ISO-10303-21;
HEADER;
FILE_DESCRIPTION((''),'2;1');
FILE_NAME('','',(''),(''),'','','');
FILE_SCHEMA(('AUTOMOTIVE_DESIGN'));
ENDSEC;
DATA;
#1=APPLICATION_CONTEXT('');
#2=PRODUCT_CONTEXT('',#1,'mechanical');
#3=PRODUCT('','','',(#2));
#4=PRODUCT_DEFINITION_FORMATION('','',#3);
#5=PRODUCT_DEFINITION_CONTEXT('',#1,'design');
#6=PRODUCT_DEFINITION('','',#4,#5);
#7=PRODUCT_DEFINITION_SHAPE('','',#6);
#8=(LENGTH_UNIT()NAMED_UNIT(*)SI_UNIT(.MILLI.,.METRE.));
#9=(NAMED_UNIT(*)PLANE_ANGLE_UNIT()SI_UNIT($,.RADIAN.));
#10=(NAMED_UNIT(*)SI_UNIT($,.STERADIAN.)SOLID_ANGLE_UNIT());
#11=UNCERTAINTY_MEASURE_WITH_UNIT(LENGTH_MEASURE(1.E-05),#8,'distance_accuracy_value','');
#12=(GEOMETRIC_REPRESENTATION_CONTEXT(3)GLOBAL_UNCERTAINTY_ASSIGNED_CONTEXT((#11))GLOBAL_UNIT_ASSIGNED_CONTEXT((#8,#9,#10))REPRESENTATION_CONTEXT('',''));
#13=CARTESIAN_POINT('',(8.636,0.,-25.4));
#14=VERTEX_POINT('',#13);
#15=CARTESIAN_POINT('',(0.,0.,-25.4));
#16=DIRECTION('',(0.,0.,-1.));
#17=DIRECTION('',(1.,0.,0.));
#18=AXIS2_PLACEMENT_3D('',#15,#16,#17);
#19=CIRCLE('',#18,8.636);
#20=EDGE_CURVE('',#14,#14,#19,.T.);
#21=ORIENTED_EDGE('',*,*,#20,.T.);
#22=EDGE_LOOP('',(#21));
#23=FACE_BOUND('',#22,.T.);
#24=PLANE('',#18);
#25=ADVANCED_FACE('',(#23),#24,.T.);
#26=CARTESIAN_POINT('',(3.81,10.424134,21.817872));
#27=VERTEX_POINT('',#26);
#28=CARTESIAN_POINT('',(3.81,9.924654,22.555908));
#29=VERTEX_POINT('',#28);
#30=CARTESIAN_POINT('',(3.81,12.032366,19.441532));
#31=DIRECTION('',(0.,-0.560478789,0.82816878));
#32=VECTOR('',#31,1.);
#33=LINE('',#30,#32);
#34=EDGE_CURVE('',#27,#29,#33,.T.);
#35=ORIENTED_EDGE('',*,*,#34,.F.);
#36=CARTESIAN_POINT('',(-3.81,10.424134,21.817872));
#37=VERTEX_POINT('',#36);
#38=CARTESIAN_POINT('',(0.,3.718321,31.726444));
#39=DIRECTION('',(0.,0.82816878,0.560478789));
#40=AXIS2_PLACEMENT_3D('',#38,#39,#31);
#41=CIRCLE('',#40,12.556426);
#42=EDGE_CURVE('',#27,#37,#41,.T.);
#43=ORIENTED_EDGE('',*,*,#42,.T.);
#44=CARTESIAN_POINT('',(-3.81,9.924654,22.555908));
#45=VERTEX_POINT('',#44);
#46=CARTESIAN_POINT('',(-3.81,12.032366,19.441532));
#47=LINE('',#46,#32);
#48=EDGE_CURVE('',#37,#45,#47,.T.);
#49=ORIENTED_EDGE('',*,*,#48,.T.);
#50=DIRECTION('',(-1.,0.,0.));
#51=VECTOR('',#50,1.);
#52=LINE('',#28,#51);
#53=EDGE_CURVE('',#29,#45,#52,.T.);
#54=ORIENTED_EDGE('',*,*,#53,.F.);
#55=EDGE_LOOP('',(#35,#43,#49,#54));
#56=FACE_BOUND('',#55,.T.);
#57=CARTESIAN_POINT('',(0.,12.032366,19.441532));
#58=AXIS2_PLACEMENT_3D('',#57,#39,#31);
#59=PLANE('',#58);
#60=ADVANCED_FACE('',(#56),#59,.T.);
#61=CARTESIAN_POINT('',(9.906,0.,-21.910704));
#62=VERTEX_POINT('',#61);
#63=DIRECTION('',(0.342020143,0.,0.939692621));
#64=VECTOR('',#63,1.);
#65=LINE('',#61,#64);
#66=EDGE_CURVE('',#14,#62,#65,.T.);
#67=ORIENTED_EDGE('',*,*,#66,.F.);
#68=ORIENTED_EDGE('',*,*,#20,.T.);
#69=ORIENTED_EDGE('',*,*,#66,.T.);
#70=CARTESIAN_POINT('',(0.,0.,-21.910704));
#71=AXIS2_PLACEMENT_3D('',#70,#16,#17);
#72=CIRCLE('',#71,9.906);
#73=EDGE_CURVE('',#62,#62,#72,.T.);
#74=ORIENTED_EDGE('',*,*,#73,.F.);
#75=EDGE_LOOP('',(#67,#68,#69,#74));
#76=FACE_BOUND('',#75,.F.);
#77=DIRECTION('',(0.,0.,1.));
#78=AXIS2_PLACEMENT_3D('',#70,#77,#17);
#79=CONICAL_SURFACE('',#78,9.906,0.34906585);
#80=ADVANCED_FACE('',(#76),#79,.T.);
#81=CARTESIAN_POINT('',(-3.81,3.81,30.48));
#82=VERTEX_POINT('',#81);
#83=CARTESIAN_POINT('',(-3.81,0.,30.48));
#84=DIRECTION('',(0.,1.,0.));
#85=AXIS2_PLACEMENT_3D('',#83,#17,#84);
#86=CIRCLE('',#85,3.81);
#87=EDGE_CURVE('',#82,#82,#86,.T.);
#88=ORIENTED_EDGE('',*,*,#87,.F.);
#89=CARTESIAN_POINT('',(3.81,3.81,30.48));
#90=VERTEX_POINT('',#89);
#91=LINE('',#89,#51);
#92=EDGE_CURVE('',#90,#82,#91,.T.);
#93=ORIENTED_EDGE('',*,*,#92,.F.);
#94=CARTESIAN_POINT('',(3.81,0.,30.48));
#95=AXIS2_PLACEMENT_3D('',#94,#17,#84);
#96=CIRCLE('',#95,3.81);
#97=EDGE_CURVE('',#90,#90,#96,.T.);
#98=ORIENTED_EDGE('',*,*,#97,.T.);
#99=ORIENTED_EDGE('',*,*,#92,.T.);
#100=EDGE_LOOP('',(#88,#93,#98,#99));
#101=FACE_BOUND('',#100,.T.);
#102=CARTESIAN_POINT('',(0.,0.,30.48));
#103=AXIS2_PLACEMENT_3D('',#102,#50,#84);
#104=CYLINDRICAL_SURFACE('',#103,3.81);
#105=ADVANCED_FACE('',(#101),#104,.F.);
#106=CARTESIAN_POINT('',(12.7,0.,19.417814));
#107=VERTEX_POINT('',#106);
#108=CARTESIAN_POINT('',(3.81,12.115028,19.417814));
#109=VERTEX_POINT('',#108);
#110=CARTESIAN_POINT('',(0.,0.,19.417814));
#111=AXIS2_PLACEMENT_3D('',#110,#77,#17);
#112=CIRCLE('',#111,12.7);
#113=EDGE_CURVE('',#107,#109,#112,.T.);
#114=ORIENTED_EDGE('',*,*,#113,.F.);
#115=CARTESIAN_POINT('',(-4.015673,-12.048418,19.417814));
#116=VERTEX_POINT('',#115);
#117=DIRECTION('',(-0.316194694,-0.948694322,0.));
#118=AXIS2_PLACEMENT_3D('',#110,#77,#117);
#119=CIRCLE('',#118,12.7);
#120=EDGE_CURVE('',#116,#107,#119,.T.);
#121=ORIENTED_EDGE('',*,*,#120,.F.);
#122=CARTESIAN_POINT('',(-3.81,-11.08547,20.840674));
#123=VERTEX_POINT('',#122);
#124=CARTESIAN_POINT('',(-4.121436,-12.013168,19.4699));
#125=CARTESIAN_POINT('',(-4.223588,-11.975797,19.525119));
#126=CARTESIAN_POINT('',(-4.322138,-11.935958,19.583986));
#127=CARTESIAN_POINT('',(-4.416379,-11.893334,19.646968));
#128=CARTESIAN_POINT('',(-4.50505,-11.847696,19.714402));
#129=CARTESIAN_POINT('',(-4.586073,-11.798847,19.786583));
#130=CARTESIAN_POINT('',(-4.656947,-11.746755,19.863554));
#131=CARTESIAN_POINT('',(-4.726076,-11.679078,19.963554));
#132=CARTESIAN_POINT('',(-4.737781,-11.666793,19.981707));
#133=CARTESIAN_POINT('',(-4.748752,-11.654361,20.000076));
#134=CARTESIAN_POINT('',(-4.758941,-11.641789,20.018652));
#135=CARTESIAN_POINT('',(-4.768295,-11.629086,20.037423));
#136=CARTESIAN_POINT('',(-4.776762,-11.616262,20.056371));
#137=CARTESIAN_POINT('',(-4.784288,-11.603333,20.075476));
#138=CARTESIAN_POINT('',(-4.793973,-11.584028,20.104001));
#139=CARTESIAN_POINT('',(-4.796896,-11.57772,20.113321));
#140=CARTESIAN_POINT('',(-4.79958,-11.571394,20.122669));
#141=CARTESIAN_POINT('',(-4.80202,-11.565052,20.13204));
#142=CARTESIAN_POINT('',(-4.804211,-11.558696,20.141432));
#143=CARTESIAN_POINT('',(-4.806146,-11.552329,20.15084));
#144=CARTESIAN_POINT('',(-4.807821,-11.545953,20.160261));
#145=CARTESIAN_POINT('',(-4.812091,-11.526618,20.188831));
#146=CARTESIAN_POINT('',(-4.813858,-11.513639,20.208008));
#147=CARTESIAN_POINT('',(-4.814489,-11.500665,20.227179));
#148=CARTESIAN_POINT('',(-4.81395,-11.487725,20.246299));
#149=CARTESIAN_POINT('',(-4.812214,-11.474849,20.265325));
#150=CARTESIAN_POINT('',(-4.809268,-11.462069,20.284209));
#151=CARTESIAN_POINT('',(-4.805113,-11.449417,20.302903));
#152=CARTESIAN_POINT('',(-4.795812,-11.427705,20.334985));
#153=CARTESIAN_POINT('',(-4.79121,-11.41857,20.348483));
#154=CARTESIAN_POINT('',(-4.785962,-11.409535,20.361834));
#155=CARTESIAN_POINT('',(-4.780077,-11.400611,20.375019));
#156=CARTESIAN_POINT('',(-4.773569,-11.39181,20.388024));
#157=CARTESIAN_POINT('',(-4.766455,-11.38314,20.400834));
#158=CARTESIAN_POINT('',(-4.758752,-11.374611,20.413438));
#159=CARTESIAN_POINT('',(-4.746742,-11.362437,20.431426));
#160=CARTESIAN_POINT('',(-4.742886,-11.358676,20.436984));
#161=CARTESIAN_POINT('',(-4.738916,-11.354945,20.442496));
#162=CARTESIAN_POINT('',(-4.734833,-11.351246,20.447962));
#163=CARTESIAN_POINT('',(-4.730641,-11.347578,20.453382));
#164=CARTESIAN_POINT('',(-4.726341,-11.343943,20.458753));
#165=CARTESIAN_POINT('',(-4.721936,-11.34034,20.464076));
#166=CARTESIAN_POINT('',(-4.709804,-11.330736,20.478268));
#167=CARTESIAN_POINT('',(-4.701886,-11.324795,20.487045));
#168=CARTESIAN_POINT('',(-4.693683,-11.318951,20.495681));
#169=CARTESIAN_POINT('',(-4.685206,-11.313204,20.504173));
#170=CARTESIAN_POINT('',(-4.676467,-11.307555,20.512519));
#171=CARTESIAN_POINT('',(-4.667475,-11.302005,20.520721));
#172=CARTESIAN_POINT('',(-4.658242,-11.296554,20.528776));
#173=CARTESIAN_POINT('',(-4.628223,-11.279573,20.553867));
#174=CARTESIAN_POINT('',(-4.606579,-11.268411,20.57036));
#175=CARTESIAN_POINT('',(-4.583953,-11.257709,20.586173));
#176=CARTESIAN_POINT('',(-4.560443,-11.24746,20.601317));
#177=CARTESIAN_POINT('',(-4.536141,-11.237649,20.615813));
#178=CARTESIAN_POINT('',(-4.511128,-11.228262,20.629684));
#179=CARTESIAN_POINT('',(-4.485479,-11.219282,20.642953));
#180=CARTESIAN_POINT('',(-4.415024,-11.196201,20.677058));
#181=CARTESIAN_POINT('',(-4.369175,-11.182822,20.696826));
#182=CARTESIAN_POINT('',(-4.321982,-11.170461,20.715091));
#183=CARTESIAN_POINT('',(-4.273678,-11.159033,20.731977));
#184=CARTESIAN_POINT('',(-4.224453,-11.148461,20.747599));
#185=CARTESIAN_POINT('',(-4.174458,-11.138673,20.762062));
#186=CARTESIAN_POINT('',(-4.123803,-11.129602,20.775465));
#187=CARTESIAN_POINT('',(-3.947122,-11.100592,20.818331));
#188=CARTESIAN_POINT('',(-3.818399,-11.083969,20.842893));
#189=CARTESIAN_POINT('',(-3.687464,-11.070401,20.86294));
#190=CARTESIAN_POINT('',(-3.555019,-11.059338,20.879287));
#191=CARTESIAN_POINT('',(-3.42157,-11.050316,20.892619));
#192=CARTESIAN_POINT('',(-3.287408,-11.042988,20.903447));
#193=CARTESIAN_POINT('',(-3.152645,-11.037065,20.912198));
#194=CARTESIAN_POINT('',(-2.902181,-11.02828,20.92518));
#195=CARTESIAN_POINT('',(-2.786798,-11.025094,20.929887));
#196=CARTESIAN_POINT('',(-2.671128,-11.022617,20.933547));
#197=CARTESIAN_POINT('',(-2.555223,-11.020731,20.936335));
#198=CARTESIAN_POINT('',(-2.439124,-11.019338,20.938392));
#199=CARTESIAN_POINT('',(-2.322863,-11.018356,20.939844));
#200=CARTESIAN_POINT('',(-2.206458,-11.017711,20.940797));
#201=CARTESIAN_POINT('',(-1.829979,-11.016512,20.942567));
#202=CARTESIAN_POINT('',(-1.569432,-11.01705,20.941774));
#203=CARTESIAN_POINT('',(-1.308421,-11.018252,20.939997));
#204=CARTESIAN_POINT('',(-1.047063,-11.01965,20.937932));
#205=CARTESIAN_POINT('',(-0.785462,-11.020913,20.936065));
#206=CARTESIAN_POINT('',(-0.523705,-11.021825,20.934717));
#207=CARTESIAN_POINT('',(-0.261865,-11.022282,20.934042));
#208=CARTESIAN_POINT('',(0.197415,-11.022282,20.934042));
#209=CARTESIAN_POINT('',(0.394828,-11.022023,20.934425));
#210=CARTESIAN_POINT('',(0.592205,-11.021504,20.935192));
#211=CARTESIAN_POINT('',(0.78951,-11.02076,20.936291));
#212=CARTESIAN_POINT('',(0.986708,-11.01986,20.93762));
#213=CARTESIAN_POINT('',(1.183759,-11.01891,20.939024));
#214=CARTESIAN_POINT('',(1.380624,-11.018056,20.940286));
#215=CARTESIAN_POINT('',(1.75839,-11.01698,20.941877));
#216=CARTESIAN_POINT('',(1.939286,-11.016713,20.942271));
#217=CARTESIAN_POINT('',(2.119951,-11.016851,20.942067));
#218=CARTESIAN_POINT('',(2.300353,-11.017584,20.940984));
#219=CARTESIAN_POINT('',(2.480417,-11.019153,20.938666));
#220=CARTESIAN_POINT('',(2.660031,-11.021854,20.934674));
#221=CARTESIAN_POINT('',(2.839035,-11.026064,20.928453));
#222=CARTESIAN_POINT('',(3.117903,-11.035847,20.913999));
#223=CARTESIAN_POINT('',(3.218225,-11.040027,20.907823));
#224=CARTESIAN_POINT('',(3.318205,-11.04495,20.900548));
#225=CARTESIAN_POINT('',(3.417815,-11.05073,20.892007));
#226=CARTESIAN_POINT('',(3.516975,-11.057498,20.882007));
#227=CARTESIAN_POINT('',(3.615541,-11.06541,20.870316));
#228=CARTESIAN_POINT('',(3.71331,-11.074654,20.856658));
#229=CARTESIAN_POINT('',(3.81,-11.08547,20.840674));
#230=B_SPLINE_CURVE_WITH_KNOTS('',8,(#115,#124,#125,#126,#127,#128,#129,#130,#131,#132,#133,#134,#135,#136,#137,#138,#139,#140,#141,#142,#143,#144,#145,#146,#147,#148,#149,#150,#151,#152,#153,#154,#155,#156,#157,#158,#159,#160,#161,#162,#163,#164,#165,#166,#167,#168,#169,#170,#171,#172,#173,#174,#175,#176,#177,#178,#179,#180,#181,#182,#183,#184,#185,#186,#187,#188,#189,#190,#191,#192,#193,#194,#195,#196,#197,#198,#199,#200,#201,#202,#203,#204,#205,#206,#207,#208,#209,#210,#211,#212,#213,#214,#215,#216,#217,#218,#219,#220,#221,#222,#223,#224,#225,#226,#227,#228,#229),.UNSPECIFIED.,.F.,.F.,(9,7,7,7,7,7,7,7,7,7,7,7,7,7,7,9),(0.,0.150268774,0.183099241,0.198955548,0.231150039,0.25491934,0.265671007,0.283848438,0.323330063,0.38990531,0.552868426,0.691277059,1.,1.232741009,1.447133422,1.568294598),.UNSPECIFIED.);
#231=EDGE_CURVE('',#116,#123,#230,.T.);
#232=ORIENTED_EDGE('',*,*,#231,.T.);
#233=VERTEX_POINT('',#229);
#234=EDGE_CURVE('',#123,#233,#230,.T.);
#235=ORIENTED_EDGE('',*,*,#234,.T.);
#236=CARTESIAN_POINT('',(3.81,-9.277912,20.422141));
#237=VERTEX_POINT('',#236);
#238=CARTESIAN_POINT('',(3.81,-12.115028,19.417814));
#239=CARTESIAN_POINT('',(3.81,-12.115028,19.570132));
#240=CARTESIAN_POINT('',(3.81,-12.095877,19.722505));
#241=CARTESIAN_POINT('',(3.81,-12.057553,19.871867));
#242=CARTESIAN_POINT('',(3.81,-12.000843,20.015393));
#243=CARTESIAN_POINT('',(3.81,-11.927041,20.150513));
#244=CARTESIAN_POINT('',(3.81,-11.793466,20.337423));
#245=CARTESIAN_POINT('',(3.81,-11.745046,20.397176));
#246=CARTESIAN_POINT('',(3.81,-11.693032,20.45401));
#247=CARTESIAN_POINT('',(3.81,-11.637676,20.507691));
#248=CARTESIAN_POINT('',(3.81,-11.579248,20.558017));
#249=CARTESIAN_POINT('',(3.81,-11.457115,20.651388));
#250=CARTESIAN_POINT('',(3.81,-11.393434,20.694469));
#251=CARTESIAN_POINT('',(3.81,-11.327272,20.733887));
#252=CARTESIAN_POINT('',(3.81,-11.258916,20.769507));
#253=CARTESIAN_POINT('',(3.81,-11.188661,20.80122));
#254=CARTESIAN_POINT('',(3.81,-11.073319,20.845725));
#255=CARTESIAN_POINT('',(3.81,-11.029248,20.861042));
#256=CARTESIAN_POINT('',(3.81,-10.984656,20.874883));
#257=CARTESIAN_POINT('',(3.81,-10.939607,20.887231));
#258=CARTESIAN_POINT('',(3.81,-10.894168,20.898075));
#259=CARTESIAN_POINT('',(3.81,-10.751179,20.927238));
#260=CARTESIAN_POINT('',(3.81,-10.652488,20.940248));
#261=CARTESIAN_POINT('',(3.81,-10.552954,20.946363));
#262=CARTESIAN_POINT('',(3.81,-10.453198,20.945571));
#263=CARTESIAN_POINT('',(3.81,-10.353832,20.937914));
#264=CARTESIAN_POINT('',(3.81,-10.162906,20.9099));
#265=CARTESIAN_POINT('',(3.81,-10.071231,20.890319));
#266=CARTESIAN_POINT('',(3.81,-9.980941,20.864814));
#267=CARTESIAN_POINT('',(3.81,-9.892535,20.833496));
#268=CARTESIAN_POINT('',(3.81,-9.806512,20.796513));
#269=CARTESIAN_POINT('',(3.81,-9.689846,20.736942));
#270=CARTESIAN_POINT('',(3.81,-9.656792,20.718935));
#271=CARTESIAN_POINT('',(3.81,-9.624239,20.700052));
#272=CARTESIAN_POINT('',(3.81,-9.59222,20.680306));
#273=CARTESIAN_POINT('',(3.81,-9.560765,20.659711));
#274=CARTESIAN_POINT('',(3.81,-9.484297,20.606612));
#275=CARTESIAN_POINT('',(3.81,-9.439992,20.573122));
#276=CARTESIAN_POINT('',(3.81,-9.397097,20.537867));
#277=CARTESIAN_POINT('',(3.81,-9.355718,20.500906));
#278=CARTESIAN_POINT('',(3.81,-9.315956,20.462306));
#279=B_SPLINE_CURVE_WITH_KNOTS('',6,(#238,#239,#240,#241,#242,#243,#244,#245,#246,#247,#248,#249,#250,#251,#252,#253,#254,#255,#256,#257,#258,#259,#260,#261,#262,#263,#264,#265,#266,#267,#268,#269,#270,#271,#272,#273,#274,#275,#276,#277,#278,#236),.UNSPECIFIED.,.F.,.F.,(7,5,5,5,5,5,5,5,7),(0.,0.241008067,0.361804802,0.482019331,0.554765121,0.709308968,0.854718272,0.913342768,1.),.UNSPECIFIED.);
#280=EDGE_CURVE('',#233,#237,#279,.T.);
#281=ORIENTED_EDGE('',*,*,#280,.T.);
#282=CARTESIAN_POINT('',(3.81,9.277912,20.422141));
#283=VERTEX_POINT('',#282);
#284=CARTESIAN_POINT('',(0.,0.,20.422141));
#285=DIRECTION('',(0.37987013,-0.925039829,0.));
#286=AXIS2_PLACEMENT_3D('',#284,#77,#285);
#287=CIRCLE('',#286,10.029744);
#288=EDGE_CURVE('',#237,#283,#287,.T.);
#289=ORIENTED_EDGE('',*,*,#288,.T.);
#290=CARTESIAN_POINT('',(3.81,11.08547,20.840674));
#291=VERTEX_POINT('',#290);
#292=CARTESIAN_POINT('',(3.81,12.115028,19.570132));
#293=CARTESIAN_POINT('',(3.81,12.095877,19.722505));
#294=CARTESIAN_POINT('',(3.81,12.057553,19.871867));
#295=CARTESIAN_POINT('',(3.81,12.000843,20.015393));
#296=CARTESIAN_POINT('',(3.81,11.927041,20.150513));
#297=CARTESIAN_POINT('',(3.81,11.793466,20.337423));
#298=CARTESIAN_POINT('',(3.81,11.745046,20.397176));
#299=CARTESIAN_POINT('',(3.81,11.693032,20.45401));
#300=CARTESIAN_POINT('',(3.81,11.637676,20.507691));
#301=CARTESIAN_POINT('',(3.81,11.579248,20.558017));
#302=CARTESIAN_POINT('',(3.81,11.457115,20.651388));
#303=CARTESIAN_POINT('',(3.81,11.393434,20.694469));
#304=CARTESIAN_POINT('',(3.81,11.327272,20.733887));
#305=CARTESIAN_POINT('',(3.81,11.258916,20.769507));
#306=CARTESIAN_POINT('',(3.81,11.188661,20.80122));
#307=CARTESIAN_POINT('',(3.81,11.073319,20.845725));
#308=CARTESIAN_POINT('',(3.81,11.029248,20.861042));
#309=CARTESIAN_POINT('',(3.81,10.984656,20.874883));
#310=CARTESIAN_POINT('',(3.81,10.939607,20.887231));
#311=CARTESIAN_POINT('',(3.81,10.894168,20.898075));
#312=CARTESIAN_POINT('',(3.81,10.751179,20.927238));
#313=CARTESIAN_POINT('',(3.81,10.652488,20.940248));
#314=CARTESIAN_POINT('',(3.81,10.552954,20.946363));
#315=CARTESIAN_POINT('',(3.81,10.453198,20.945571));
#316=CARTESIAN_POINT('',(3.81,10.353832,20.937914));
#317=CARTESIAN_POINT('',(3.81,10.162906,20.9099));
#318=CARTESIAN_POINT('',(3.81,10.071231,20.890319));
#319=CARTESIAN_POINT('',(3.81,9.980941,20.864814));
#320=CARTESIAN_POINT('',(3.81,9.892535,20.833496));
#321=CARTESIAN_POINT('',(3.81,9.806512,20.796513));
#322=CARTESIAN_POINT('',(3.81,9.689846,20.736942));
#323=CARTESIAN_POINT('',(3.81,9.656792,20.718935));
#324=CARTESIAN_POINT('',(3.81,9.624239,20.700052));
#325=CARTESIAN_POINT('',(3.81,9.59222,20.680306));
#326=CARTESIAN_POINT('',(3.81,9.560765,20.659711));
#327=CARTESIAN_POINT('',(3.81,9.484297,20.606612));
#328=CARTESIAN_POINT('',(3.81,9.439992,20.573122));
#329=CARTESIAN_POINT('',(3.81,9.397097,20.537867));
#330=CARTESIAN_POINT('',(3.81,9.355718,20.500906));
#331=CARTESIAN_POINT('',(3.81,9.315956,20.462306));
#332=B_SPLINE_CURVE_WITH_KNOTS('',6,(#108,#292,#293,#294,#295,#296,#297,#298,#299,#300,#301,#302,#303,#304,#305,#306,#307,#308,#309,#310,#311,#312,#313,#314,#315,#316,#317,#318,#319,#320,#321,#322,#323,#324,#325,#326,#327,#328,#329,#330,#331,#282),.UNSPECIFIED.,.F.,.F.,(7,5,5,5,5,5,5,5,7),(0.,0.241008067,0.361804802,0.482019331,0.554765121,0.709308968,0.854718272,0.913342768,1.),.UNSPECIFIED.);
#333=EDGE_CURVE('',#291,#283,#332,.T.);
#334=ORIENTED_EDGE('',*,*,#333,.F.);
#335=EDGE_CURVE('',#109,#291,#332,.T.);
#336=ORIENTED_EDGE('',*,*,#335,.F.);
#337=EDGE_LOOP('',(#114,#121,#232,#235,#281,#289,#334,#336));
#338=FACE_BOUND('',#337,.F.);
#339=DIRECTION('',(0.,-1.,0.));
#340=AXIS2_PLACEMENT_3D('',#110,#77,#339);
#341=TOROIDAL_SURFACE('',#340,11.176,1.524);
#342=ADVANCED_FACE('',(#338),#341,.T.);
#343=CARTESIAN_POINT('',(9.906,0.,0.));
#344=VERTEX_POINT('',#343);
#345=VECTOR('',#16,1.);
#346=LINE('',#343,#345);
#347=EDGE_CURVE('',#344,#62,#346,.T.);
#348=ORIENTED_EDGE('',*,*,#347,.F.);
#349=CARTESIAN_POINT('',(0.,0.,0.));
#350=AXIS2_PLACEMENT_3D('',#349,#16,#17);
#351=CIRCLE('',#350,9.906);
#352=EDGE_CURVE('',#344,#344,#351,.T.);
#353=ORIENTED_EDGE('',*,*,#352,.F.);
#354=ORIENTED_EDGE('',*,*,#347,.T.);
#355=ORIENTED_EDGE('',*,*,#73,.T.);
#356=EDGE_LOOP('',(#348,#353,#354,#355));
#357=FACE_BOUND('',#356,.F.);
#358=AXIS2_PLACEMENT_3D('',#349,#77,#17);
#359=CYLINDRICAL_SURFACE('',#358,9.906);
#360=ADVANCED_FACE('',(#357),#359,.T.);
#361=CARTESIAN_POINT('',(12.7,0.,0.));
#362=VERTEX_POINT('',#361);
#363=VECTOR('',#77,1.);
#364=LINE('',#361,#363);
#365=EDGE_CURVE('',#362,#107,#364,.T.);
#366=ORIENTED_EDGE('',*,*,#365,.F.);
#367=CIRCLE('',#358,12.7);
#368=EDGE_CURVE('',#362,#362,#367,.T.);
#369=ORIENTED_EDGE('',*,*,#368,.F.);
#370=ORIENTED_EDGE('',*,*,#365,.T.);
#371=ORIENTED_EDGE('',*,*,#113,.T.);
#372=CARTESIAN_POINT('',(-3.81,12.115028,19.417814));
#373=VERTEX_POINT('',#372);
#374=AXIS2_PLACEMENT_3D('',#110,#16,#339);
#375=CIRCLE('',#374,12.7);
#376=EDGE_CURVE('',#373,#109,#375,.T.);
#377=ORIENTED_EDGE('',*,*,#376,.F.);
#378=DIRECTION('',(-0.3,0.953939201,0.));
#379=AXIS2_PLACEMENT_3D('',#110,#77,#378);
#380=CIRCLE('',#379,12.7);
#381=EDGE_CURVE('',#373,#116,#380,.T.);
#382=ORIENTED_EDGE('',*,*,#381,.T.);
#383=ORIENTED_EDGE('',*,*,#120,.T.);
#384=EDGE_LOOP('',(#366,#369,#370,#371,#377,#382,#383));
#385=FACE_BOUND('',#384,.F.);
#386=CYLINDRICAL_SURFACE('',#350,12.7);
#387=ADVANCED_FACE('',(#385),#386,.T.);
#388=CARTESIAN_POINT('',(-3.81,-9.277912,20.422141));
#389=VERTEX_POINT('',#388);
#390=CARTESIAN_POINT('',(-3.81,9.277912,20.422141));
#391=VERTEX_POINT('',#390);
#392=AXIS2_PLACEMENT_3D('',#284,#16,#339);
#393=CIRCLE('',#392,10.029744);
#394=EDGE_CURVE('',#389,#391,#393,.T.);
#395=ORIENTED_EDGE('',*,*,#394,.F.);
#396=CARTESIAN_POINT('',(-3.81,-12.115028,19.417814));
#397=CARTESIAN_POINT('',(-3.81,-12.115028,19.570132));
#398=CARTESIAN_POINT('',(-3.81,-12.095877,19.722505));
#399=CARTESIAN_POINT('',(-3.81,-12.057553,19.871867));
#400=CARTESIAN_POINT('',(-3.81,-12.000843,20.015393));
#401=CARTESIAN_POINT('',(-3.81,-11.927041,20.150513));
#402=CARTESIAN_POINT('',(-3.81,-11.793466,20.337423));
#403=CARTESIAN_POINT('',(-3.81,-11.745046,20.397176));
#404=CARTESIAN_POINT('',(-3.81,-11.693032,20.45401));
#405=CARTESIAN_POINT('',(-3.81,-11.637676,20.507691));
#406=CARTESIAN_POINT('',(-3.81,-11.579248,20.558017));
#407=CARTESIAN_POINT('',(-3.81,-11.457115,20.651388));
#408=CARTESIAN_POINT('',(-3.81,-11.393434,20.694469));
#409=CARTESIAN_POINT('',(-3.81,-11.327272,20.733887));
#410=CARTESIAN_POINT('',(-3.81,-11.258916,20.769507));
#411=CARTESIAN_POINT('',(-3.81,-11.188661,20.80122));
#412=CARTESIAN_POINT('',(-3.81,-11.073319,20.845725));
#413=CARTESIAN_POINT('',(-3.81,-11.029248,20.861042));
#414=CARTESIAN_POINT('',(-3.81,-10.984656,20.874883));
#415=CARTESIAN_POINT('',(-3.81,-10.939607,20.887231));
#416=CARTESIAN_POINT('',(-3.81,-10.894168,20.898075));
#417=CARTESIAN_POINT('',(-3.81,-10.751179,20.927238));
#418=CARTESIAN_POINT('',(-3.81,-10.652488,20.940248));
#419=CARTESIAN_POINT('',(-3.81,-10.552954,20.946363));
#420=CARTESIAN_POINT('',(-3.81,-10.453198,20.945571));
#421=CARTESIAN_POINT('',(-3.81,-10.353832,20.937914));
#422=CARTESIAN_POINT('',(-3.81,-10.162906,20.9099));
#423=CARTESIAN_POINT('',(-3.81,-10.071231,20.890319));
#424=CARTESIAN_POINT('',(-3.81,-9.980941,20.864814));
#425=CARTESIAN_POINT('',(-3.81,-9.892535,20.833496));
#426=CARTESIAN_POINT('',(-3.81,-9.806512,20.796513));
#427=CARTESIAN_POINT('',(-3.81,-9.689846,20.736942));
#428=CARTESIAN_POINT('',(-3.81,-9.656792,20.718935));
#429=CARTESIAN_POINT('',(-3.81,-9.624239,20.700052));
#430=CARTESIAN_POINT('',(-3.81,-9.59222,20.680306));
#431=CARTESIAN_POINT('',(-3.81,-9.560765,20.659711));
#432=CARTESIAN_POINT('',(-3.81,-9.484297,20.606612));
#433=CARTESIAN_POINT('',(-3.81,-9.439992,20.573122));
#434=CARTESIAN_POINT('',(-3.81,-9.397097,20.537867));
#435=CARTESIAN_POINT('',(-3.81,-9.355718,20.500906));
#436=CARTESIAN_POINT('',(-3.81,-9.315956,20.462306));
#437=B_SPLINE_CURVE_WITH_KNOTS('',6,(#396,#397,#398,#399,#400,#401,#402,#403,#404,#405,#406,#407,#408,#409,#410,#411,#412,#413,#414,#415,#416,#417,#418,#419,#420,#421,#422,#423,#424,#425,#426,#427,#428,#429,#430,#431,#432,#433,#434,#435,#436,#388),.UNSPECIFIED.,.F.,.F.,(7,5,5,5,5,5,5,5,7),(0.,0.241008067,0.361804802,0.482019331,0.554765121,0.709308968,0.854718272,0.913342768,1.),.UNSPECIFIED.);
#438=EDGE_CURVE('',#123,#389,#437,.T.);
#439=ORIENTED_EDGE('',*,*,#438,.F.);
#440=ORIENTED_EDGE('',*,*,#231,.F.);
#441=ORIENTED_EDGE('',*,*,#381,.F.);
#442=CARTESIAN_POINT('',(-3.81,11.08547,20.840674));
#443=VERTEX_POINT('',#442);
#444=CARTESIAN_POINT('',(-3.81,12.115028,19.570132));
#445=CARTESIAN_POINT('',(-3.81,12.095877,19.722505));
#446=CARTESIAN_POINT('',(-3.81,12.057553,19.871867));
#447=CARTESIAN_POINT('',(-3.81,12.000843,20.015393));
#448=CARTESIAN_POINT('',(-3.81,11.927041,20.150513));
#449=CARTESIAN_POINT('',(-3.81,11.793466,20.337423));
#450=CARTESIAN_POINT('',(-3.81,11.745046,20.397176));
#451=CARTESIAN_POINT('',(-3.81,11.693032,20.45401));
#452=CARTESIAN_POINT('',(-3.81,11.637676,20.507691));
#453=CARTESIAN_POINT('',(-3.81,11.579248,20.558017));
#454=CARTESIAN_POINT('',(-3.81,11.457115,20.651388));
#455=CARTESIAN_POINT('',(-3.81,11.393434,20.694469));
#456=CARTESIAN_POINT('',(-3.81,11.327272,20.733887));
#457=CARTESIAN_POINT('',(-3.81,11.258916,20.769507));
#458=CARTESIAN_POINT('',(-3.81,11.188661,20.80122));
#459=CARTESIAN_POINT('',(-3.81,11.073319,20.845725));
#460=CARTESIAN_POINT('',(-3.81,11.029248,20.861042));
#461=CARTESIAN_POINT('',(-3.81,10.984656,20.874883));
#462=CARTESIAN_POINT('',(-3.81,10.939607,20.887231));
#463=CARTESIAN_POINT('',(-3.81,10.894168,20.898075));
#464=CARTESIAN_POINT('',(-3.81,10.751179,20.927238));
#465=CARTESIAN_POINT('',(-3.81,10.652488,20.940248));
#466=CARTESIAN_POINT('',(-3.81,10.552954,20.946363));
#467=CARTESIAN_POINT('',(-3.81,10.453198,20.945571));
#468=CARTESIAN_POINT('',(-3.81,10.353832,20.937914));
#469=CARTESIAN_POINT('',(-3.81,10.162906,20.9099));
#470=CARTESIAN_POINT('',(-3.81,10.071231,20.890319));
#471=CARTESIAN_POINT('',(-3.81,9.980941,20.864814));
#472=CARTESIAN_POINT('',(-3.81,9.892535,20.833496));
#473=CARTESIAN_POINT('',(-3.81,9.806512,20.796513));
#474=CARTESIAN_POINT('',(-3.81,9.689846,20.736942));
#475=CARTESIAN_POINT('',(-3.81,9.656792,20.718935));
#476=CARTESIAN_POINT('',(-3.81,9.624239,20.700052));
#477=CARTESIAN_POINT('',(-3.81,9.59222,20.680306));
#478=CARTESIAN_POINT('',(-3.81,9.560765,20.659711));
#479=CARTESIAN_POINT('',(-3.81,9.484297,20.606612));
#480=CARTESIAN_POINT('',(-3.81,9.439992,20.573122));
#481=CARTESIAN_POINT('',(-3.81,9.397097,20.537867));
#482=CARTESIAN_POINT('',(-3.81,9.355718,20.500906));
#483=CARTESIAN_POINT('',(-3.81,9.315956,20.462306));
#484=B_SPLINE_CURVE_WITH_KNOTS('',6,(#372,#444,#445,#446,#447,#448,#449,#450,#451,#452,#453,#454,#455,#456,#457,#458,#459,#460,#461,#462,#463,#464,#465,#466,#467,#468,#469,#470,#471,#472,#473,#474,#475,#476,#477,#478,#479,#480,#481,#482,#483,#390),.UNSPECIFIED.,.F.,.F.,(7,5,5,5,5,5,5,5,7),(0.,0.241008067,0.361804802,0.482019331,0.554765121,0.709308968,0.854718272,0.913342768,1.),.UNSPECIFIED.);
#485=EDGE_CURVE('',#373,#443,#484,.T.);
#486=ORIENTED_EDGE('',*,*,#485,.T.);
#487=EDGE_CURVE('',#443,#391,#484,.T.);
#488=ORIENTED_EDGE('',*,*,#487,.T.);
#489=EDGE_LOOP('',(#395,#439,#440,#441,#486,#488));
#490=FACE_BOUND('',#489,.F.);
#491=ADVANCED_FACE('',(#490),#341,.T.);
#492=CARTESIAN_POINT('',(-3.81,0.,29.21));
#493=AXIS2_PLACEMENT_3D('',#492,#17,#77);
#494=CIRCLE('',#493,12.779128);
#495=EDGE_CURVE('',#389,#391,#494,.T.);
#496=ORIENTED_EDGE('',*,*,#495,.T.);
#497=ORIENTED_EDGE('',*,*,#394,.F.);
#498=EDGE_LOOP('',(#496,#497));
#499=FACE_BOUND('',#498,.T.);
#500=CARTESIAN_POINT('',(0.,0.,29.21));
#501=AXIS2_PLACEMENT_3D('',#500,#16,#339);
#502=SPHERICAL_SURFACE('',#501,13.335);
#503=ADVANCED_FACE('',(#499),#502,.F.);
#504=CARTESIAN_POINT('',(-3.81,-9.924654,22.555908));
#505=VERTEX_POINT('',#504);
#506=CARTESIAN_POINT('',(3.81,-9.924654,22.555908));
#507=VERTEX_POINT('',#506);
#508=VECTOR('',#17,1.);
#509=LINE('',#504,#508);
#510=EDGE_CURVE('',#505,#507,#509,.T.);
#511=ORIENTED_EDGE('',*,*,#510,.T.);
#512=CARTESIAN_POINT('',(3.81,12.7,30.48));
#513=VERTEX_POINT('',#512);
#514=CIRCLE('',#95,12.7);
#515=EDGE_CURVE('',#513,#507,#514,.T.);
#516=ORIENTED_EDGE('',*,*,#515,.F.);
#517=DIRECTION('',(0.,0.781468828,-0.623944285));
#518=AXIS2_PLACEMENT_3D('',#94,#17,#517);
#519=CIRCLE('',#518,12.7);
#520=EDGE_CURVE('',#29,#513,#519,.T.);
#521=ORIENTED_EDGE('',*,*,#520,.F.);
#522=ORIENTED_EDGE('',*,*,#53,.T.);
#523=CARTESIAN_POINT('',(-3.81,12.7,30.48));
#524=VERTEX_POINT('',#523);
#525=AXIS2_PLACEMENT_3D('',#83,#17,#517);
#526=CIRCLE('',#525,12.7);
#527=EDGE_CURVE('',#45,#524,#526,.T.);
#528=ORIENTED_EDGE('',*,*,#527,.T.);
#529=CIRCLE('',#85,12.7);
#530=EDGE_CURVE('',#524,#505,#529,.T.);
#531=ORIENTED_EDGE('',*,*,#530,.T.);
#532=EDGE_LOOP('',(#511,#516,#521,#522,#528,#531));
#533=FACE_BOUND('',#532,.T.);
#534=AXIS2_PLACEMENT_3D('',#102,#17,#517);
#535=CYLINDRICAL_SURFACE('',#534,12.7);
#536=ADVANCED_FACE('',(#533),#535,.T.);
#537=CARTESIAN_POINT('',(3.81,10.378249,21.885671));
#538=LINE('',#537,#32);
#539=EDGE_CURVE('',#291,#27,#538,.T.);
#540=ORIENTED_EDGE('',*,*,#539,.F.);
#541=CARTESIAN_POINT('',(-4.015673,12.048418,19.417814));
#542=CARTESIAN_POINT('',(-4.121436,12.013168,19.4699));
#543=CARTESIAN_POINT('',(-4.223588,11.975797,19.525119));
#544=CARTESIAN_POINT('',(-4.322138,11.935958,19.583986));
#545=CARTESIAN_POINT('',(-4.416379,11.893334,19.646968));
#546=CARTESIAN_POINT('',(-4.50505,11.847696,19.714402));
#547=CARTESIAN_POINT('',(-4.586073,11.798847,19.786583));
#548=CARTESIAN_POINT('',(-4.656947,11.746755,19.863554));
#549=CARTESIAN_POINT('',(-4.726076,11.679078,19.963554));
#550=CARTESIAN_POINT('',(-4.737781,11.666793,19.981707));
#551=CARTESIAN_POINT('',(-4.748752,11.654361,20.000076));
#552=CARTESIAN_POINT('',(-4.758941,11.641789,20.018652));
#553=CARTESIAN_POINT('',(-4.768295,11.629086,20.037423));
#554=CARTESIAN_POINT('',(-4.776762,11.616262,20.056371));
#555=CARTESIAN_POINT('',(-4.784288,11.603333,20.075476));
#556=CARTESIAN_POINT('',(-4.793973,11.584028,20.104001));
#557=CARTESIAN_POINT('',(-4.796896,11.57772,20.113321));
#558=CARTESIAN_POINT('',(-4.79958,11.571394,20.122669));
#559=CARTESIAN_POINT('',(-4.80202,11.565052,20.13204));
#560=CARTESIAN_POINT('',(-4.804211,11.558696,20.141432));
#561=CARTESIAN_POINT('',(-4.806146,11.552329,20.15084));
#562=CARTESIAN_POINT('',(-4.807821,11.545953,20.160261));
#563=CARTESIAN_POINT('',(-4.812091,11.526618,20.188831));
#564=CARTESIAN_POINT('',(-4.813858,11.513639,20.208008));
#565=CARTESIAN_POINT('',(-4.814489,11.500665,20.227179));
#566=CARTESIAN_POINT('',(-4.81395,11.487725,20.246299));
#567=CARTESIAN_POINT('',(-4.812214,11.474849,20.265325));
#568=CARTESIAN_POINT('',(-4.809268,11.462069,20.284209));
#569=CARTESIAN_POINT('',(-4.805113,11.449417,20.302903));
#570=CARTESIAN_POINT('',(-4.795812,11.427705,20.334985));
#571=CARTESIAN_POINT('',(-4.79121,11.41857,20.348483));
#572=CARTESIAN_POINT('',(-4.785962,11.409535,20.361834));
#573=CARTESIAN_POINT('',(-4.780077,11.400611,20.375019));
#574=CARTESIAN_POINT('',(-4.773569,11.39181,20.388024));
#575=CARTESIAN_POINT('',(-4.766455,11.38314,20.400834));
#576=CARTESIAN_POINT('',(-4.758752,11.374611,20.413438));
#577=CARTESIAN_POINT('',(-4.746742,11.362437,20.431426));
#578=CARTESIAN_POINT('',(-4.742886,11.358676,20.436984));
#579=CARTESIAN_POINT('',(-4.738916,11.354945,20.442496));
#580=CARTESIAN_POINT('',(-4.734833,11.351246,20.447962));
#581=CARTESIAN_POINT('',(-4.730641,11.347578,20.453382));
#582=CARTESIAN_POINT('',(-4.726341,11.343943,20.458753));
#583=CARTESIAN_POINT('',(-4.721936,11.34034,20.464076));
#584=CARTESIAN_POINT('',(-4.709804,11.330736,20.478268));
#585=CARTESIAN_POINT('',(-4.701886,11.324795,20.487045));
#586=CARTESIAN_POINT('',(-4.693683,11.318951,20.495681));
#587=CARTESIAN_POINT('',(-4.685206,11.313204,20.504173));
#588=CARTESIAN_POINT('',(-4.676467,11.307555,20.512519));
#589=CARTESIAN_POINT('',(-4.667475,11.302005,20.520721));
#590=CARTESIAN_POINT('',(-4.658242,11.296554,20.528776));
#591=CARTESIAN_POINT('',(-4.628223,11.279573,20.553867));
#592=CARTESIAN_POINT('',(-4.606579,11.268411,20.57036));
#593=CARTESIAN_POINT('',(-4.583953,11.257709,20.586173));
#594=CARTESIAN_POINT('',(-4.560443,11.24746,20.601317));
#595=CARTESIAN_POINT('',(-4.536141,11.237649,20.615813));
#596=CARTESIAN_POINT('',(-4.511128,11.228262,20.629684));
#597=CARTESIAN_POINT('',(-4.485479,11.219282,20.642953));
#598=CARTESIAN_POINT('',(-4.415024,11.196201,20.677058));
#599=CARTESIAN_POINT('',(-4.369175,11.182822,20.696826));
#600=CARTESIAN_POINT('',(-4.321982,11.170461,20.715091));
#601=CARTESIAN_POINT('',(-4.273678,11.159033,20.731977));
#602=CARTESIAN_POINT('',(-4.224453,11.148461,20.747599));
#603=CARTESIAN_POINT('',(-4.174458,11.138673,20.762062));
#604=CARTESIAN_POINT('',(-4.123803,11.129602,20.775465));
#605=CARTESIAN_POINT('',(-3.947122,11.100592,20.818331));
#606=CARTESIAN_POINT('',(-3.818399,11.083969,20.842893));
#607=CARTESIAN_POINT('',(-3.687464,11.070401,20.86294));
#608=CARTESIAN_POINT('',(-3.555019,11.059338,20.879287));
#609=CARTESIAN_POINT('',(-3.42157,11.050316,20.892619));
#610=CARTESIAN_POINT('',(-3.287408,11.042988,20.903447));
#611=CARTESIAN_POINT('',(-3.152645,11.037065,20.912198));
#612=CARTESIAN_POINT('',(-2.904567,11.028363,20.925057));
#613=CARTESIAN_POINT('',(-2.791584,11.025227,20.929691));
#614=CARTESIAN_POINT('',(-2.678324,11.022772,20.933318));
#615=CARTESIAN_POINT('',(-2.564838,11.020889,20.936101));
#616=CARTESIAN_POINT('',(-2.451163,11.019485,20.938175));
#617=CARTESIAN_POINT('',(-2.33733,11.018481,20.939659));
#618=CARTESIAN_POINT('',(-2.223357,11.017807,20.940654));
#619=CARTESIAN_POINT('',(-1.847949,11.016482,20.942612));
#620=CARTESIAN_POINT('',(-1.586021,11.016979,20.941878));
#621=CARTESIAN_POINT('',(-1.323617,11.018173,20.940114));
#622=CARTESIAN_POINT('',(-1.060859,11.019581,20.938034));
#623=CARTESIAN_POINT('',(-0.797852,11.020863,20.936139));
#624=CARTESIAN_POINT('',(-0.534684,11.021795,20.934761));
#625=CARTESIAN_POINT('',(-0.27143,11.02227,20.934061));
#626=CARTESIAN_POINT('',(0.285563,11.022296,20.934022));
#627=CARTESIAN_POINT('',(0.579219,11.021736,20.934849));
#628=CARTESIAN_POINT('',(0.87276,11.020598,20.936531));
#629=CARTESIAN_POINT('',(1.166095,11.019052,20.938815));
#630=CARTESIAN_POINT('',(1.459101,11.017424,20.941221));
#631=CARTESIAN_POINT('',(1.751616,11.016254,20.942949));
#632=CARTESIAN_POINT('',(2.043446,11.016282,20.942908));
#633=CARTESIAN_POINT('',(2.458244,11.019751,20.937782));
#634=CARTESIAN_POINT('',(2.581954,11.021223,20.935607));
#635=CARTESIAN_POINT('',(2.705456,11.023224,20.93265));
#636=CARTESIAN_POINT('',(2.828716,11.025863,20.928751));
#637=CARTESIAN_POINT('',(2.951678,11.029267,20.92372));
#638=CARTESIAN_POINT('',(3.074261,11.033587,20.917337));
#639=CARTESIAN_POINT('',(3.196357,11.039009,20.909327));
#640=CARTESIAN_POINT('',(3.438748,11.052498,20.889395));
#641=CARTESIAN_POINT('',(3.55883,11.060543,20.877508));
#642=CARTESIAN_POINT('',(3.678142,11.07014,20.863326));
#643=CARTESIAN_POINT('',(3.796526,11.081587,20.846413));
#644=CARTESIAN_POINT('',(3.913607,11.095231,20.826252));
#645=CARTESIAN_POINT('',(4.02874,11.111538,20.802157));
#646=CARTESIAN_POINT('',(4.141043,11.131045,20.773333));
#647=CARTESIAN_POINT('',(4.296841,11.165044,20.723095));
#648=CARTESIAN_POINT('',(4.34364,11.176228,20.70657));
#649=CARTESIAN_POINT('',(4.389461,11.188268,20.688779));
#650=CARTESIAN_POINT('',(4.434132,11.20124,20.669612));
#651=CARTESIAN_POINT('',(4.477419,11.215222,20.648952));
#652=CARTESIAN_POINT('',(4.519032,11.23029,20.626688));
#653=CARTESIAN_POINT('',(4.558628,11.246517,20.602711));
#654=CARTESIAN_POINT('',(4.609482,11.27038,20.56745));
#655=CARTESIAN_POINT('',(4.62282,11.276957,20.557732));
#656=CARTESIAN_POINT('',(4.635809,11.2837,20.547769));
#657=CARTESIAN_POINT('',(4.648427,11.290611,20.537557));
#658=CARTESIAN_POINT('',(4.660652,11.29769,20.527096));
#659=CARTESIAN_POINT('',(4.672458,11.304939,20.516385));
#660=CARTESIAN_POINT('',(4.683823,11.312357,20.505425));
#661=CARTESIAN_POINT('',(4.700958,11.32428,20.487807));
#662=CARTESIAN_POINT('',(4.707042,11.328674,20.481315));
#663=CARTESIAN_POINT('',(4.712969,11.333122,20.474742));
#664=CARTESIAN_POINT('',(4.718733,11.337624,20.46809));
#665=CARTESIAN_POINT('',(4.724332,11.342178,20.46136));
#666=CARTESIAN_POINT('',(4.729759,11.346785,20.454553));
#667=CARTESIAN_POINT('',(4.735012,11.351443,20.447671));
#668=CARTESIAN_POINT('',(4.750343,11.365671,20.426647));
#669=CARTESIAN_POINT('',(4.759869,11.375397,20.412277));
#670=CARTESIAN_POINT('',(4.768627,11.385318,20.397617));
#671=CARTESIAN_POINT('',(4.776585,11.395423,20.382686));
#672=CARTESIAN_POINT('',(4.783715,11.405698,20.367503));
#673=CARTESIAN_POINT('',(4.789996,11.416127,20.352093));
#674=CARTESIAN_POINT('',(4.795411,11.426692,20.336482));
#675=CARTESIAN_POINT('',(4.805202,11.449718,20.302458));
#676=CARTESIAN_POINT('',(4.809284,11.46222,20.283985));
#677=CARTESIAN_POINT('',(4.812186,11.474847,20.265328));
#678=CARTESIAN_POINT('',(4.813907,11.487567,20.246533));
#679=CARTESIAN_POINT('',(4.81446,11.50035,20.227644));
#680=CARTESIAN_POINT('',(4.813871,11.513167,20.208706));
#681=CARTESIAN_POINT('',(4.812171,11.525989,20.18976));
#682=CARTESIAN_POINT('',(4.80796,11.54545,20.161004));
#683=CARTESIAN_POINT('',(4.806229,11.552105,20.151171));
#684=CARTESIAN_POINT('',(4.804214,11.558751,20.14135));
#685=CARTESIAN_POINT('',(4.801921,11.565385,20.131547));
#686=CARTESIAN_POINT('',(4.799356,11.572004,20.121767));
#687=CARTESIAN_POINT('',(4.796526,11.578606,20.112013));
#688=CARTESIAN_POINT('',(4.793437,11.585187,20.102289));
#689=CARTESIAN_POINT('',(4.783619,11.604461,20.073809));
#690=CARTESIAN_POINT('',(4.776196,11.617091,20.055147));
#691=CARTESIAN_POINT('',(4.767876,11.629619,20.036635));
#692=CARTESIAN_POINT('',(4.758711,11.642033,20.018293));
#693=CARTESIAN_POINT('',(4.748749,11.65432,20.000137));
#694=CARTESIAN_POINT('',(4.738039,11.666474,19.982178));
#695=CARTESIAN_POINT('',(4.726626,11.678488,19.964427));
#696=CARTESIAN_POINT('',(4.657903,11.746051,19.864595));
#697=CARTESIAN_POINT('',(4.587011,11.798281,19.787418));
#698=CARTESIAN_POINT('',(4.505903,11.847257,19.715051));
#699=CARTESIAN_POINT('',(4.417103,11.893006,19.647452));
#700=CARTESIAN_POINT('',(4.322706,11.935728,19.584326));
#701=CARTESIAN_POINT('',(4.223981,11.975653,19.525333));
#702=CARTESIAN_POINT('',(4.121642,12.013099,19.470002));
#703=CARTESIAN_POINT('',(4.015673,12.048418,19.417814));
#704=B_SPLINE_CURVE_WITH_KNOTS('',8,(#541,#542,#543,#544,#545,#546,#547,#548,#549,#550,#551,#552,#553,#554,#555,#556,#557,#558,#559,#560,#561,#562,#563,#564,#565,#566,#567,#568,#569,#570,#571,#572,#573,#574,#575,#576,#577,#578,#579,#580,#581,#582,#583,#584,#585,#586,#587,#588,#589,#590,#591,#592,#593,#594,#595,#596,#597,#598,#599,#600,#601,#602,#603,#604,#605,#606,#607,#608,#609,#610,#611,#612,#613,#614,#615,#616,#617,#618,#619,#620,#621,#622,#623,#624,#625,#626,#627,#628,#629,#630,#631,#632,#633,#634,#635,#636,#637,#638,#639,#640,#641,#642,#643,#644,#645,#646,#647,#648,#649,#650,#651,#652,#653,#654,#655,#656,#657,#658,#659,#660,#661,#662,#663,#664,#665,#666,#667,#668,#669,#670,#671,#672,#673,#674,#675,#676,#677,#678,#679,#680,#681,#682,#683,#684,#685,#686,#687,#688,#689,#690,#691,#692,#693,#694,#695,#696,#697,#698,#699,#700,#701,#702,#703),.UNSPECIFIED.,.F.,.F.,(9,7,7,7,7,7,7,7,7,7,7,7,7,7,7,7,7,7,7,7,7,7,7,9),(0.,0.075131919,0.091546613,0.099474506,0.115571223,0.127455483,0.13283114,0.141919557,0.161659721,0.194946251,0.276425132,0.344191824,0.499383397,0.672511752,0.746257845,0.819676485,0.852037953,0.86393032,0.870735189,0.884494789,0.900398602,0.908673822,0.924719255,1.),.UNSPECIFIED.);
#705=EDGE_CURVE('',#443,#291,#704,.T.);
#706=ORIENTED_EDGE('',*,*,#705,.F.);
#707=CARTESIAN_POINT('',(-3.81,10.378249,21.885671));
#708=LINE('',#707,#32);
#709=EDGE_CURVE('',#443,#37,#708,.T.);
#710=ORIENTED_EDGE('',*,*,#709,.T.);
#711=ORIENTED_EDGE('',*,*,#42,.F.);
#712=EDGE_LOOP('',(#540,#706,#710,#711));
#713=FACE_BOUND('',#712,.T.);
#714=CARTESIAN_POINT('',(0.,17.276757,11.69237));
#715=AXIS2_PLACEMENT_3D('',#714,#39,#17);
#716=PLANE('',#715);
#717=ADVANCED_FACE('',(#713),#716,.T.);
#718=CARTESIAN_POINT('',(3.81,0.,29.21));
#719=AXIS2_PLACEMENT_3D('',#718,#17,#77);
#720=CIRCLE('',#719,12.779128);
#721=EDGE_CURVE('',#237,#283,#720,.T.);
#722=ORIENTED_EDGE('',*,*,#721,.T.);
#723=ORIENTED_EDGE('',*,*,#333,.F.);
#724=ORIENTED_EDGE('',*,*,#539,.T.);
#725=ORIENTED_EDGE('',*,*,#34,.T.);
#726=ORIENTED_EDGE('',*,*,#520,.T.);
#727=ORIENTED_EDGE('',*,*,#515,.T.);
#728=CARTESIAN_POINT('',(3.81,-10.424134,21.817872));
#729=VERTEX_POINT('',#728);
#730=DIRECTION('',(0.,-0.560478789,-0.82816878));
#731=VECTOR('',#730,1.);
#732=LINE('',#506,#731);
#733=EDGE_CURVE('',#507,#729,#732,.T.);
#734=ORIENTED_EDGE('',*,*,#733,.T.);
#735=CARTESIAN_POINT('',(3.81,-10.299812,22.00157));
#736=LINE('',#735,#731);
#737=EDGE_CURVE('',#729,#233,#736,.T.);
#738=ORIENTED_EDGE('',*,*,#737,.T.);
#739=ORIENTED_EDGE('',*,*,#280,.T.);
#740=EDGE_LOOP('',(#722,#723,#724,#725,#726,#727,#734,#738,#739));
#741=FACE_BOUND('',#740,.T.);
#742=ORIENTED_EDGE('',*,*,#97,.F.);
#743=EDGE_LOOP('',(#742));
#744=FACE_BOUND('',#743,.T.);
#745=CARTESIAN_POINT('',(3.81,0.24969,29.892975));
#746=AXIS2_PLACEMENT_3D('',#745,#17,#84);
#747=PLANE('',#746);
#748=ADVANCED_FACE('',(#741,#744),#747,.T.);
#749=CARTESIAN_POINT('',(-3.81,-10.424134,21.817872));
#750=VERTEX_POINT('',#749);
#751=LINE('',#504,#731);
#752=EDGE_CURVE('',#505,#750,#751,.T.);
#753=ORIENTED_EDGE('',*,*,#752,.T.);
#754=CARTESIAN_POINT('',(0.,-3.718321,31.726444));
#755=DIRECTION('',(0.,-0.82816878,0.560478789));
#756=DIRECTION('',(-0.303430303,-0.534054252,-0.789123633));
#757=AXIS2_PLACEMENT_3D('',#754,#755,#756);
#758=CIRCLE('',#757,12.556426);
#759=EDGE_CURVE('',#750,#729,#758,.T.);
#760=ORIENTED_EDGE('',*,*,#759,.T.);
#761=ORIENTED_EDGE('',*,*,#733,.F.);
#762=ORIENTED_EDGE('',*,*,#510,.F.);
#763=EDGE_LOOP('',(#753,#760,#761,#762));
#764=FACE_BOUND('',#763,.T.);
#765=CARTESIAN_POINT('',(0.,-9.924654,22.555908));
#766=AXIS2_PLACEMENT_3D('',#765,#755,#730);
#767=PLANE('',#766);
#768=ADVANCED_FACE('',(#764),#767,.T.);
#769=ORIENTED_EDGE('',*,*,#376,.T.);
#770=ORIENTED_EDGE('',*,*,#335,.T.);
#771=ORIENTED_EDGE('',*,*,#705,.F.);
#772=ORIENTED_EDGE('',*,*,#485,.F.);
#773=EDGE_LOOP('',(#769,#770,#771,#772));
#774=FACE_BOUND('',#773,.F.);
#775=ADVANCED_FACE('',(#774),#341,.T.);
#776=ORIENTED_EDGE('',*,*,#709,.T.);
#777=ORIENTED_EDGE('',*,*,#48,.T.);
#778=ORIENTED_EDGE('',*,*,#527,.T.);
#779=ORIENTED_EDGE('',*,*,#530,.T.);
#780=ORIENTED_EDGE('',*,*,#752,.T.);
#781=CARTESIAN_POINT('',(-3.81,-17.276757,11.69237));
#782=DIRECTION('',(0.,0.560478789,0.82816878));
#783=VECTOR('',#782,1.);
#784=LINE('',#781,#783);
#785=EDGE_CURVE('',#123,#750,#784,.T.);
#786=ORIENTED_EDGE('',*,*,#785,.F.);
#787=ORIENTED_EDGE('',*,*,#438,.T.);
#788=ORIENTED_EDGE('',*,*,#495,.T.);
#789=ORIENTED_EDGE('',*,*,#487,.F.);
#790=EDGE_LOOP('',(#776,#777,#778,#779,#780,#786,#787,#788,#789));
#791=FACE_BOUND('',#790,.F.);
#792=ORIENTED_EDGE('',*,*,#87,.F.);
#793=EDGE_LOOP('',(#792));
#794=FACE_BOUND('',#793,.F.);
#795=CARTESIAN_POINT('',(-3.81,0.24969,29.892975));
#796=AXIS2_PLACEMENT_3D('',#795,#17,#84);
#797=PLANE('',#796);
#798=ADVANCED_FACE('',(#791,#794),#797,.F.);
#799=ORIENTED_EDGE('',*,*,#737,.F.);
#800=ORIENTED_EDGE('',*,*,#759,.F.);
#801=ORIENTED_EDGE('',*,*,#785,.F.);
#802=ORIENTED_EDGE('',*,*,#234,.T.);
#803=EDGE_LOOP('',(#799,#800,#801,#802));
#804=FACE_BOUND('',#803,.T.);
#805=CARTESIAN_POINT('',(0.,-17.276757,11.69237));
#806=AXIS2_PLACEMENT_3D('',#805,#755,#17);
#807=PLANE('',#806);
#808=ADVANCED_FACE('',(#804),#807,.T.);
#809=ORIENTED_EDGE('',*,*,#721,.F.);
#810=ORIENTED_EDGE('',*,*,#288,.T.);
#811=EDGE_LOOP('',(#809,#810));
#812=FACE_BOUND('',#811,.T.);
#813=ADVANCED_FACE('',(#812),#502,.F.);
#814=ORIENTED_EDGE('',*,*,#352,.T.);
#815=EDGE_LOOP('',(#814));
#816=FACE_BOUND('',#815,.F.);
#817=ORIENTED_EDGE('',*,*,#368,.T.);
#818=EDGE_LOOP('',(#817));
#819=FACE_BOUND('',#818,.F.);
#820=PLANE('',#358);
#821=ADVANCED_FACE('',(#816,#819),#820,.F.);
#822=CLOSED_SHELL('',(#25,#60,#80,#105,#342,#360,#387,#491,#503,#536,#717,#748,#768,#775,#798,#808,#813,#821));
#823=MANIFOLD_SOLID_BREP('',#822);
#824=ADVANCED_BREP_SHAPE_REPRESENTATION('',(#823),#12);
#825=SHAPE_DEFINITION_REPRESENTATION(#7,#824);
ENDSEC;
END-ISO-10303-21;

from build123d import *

# Parameters (mm, degrees)
F0_R         = 12.7
F1_DEPTH     = 25.4
F4_R         = 3.81
F5_DEPTH     = 3.81
F6_T4_ANGLE  = 90
F6_T9_ANGLE  = 90
F6_T14_ANGLE = 270
F6_T19_ANGLE = 270
F6_T24_ANGLE = 270
F6_T29_ANGLE = 270
F7_R         = 9.906
F8_DEPTH     = 25.4
F9_SIZE2     = 3.4892963227
F9_SIZE      = 1.27


# Not quite as in the source:
# - a fillet or chamfer that OpenCascade refuses, or shapes differently, is made with other operations: its cross-section is extruded or revolved along the edge and cut away or added


with BuildPart() as f1:
    # F0 (on Top) → F1 (new body)
    with BuildSketch(Plane.XY):
        Circle(F0_R)
    extrude(amount=F1_DEPTH)

    # F2 (on Right) → F3 (revolve, cut)
    with BuildSketch(Plane.YZ):
        with BuildLine():
            Line((0, 15.875), (0, 42.545))
            ThreePointArc((0, 42.545), (-13.335, 29.21), (0, 15.875))
        make_face()
    revolve(axis=Axis((0, 0, 25.198931613), (0, 0, 1)), mode=Mode.SUBTRACT)

    # F4 (on Right) → F5 (join, symmetric)
    with BuildSketch(Plane.YZ):
        with BuildLine():
            ThreePointArc((9.9246541198, 22.5559075849), (11.9860983502, 26.2819711364), (12.7, 30.48))
            ThreePointArc((12.7, 30.48), (-4.1980288636, 42.4660983502), (-9.9246541198, 22.5559075849))
            ThreePointArc((-9.9246541198, 22.5559075849), (0, 17.78), (9.9246541198, 22.5559075849))
        make_face()
        with Locations((0, 30.48)):
            Circle(F4_R, mode=Mode.SUBTRACT)
        with BuildLine():
            ThreePointArc((9.9246541198, 22.5559075849), (0, 17.78), (-9.9246541198, 22.5559075849))
            Line((-9.9246541198, 22.5559075849), (-12.0323663577, 19.4415319711))
            ThreePointArc((-12.0323663577, 19.4415319711), (-6.795833015, 14.9780300529), (0, 13.9006329783))
            ThreePointArc((0, 13.9006329783), (6.795833015, 14.9780300529), (12.0323663577, 19.4415319711))
            Line((12.0323663577, 19.4415319711), (9.9246541198, 22.5559075849))
        make_face()
    extrude(amount=F5_DEPTH, both=True)

    # F6: fillet of radius 1.524 on 2 edges, made by hand


with BuildPart() as f6_tool2:
    # F6_s3 → F6_t4 (revolve)
    with BuildSketch(Plane.XZ):
        with BuildLine():
            ThreePointArc((12.7, 19.4178140847), (11.7125077962, 20.8442555958), (10.0297435897, 20.4221408452))
            ThreePointArc((10.0297435897, 20.4221408452), (11.6075121114, 22.645863531), (12.7, 25.1440161092))
            Line((12.7, 25.1440161092), (12.7, 19.4178140847))
        make_face()
    revolve(axis=Axis((0, 0, 25.1440161092), (0, 0, -1)), revolution_arc=F6_T4_ANGLE)

    split(bisect_by=Plane.YZ.offset(3.81), keep=Keep.TOP)


with BuildPart() as f1_1:
    add(f1.part)

    # F6_t1: cut F6_tool2
    add(f6_tool2.part, mode=Mode.SUBTRACT)


with BuildPart() as f6_tool7:
    # F6_s8 → F6_t9 (revolve)
    with BuildSketch(Plane.XZ):
        with BuildLine():
            ThreePointArc((12.7, 19.4178140847), (11.7125077962, 20.8442555958), (10.0297435897, 20.4221408452))
            ThreePointArc((10.0297435897, 20.4221408452), (11.6075121114, 22.645863531), (12.7, 25.1440161092))
            Line((12.7, 25.1440161092), (12.7, 19.4178140847))
        make_face()
    revolve(axis=Axis((0, 0, 25.1440161092), (0, 0, -1)), revolution_arc=F6_T9_ANGLE)

    split(bisect_by=Plane(origin=(0, -17.2767572385, 11.6923702143), x_dir=(1, 0, 0), z_dir=(0, -0.8281687795, 0.5604787887)), keep=Keep.TOP)


with BuildPart() as f1_2:
    add(f1_1.part)

    # F6_t6: cut F6_tool7
    add(f6_tool7.part, mode=Mode.SUBTRACT)


with BuildPart() as f6_tool12:
    # F6_s13 → F6_t14 (revolve)
    with BuildSketch(Plane.YZ):
        with BuildLine():
            ThreePointArc((-12.7, 19.4178140847), (-11.7125077962, 20.8442555958), (-10.0297435897, 20.4221408452))
            ThreePointArc((-10.0297435897, 20.4221408452), (-11.6075121114, 22.645863531), (-12.7, 25.1440161092))
            Line((-12.7, 25.1440161092), (-12.7, 19.4178140847))
        make_face()
    revolve(axis=Axis((0, 0, 25.1440161092), (0, 0, -1)), revolution_arc=F6_T14_ANGLE)

    split(bisect_by=Plane(origin=(0, -17.2767572385, 11.6923702143), x_dir=(1, 0, 0), z_dir=(0, -0.8281687795, 0.5604787887)), keep=Keep.TOP)


with BuildPart() as f1_3:
    add(f1_2.part)

    # F6_t11: cut F6_tool12
    add(f6_tool12.part, mode=Mode.SUBTRACT)


with BuildPart() as f6_tool17:
    # F6_s18 → F6_t19 (revolve)
    with BuildSketch(Plane.YZ):
        with BuildLine():
            ThreePointArc((-12.7, 19.4178140847), (-11.7125077962, 20.8442555958), (-10.0297435897, 20.4221408452))
            ThreePointArc((-10.0297435897, 20.4221408452), (-11.6075121114, 22.645863531), (-12.7, 25.1440161092))
            Line((-12.7, 25.1440161092), (-12.7, 19.4178140847))
        make_face()
    revolve(axis=Axis((0, 0, 25.1440161092), (0, 0, -1)), revolution_arc=F6_T19_ANGLE)

    split(bisect_by=Plane.YZ.offset(-3.81), keep=Keep.BOTTOM)


with BuildPart() as f1_4:
    add(f1_3.part)

    # F6_t16: cut F6_tool17
    add(f6_tool17.part, mode=Mode.SUBTRACT)


with BuildPart() as f6_tool22:
    # F6_s23 → F6_t24 (revolve)
    with BuildSketch(Plane.YZ):
        with BuildLine():
            ThreePointArc((-12.7, 19.4178140847), (-11.7125077962, 20.8442555958), (-10.0297435897, 20.4221408452))
            ThreePointArc((-10.0297435897, 20.4221408452), (-11.6075121114, 22.645863531), (-12.7, 25.1440161092))
            Line((-12.7, 25.1440161092), (-12.7, 19.4178140847))
        make_face()
    revolve(axis=Axis((0, 0, 25.1440161092), (0, 0, -1)), revolution_arc=F6_T24_ANGLE)

    split(bisect_by=Plane.YZ.offset(3.81), keep=Keep.TOP)


with BuildPart() as f1_5:
    add(f1_4.part)

    # F6_t21: cut F6_tool22
    add(f6_tool22.part, mode=Mode.SUBTRACT)


with BuildPart() as f6_tool27:
    # F6_s28 → F6_t29 (revolve)
    with BuildSketch(Plane.YZ):
        with BuildLine():
            ThreePointArc((-12.7, 19.4178140847), (-11.7125077962, 20.8442555958), (-10.0297435897, 20.4221408452))
            ThreePointArc((-10.0297435897, 20.4221408452), (-11.6075121114, 22.645863531), (-12.7, 25.1440161092))
            Line((-12.7, 25.1440161092), (-12.7, 19.4178140847))
        make_face()
    revolve(axis=Axis((0, 0, 25.1440161092), (0, 0, -1)), revolution_arc=F6_T29_ANGLE)

    split(bisect_by=Plane(origin=(0, 17.2767572385, 11.6923702143), x_dir=(1, 0, 0), z_dir=(0, 0.8281687795, 0.5604787887)), keep=Keep.TOP)


with BuildPart() as f1_6:
    add(f1_5.part)

    # F6_t26: cut F6_tool27
    add(f6_tool27.part, mode=Mode.SUBTRACT)

    # F7 (on face) → F8 (join)
    with BuildSketch(Plane(origin=(0, 0, 0), x_dir=(1, 0, 0), z_dir=(0, 0, -1))):
        Circle(F7_R)
    extrude(amount=F8_DEPTH)

    # F9
    f9_edges = [f1_6.edges().sort_by_distance(p)[0] for p in [
        (-9.906, 0, -25.4),
    ]]
    f9_side = f1_6.faces().sort_by_distance((0, 0, -25.4))[0]
    chamfer(f9_edges, length=F9_SIZE, length2=F9_SIZE2, reference=f9_side)


solid = f1_6.part
